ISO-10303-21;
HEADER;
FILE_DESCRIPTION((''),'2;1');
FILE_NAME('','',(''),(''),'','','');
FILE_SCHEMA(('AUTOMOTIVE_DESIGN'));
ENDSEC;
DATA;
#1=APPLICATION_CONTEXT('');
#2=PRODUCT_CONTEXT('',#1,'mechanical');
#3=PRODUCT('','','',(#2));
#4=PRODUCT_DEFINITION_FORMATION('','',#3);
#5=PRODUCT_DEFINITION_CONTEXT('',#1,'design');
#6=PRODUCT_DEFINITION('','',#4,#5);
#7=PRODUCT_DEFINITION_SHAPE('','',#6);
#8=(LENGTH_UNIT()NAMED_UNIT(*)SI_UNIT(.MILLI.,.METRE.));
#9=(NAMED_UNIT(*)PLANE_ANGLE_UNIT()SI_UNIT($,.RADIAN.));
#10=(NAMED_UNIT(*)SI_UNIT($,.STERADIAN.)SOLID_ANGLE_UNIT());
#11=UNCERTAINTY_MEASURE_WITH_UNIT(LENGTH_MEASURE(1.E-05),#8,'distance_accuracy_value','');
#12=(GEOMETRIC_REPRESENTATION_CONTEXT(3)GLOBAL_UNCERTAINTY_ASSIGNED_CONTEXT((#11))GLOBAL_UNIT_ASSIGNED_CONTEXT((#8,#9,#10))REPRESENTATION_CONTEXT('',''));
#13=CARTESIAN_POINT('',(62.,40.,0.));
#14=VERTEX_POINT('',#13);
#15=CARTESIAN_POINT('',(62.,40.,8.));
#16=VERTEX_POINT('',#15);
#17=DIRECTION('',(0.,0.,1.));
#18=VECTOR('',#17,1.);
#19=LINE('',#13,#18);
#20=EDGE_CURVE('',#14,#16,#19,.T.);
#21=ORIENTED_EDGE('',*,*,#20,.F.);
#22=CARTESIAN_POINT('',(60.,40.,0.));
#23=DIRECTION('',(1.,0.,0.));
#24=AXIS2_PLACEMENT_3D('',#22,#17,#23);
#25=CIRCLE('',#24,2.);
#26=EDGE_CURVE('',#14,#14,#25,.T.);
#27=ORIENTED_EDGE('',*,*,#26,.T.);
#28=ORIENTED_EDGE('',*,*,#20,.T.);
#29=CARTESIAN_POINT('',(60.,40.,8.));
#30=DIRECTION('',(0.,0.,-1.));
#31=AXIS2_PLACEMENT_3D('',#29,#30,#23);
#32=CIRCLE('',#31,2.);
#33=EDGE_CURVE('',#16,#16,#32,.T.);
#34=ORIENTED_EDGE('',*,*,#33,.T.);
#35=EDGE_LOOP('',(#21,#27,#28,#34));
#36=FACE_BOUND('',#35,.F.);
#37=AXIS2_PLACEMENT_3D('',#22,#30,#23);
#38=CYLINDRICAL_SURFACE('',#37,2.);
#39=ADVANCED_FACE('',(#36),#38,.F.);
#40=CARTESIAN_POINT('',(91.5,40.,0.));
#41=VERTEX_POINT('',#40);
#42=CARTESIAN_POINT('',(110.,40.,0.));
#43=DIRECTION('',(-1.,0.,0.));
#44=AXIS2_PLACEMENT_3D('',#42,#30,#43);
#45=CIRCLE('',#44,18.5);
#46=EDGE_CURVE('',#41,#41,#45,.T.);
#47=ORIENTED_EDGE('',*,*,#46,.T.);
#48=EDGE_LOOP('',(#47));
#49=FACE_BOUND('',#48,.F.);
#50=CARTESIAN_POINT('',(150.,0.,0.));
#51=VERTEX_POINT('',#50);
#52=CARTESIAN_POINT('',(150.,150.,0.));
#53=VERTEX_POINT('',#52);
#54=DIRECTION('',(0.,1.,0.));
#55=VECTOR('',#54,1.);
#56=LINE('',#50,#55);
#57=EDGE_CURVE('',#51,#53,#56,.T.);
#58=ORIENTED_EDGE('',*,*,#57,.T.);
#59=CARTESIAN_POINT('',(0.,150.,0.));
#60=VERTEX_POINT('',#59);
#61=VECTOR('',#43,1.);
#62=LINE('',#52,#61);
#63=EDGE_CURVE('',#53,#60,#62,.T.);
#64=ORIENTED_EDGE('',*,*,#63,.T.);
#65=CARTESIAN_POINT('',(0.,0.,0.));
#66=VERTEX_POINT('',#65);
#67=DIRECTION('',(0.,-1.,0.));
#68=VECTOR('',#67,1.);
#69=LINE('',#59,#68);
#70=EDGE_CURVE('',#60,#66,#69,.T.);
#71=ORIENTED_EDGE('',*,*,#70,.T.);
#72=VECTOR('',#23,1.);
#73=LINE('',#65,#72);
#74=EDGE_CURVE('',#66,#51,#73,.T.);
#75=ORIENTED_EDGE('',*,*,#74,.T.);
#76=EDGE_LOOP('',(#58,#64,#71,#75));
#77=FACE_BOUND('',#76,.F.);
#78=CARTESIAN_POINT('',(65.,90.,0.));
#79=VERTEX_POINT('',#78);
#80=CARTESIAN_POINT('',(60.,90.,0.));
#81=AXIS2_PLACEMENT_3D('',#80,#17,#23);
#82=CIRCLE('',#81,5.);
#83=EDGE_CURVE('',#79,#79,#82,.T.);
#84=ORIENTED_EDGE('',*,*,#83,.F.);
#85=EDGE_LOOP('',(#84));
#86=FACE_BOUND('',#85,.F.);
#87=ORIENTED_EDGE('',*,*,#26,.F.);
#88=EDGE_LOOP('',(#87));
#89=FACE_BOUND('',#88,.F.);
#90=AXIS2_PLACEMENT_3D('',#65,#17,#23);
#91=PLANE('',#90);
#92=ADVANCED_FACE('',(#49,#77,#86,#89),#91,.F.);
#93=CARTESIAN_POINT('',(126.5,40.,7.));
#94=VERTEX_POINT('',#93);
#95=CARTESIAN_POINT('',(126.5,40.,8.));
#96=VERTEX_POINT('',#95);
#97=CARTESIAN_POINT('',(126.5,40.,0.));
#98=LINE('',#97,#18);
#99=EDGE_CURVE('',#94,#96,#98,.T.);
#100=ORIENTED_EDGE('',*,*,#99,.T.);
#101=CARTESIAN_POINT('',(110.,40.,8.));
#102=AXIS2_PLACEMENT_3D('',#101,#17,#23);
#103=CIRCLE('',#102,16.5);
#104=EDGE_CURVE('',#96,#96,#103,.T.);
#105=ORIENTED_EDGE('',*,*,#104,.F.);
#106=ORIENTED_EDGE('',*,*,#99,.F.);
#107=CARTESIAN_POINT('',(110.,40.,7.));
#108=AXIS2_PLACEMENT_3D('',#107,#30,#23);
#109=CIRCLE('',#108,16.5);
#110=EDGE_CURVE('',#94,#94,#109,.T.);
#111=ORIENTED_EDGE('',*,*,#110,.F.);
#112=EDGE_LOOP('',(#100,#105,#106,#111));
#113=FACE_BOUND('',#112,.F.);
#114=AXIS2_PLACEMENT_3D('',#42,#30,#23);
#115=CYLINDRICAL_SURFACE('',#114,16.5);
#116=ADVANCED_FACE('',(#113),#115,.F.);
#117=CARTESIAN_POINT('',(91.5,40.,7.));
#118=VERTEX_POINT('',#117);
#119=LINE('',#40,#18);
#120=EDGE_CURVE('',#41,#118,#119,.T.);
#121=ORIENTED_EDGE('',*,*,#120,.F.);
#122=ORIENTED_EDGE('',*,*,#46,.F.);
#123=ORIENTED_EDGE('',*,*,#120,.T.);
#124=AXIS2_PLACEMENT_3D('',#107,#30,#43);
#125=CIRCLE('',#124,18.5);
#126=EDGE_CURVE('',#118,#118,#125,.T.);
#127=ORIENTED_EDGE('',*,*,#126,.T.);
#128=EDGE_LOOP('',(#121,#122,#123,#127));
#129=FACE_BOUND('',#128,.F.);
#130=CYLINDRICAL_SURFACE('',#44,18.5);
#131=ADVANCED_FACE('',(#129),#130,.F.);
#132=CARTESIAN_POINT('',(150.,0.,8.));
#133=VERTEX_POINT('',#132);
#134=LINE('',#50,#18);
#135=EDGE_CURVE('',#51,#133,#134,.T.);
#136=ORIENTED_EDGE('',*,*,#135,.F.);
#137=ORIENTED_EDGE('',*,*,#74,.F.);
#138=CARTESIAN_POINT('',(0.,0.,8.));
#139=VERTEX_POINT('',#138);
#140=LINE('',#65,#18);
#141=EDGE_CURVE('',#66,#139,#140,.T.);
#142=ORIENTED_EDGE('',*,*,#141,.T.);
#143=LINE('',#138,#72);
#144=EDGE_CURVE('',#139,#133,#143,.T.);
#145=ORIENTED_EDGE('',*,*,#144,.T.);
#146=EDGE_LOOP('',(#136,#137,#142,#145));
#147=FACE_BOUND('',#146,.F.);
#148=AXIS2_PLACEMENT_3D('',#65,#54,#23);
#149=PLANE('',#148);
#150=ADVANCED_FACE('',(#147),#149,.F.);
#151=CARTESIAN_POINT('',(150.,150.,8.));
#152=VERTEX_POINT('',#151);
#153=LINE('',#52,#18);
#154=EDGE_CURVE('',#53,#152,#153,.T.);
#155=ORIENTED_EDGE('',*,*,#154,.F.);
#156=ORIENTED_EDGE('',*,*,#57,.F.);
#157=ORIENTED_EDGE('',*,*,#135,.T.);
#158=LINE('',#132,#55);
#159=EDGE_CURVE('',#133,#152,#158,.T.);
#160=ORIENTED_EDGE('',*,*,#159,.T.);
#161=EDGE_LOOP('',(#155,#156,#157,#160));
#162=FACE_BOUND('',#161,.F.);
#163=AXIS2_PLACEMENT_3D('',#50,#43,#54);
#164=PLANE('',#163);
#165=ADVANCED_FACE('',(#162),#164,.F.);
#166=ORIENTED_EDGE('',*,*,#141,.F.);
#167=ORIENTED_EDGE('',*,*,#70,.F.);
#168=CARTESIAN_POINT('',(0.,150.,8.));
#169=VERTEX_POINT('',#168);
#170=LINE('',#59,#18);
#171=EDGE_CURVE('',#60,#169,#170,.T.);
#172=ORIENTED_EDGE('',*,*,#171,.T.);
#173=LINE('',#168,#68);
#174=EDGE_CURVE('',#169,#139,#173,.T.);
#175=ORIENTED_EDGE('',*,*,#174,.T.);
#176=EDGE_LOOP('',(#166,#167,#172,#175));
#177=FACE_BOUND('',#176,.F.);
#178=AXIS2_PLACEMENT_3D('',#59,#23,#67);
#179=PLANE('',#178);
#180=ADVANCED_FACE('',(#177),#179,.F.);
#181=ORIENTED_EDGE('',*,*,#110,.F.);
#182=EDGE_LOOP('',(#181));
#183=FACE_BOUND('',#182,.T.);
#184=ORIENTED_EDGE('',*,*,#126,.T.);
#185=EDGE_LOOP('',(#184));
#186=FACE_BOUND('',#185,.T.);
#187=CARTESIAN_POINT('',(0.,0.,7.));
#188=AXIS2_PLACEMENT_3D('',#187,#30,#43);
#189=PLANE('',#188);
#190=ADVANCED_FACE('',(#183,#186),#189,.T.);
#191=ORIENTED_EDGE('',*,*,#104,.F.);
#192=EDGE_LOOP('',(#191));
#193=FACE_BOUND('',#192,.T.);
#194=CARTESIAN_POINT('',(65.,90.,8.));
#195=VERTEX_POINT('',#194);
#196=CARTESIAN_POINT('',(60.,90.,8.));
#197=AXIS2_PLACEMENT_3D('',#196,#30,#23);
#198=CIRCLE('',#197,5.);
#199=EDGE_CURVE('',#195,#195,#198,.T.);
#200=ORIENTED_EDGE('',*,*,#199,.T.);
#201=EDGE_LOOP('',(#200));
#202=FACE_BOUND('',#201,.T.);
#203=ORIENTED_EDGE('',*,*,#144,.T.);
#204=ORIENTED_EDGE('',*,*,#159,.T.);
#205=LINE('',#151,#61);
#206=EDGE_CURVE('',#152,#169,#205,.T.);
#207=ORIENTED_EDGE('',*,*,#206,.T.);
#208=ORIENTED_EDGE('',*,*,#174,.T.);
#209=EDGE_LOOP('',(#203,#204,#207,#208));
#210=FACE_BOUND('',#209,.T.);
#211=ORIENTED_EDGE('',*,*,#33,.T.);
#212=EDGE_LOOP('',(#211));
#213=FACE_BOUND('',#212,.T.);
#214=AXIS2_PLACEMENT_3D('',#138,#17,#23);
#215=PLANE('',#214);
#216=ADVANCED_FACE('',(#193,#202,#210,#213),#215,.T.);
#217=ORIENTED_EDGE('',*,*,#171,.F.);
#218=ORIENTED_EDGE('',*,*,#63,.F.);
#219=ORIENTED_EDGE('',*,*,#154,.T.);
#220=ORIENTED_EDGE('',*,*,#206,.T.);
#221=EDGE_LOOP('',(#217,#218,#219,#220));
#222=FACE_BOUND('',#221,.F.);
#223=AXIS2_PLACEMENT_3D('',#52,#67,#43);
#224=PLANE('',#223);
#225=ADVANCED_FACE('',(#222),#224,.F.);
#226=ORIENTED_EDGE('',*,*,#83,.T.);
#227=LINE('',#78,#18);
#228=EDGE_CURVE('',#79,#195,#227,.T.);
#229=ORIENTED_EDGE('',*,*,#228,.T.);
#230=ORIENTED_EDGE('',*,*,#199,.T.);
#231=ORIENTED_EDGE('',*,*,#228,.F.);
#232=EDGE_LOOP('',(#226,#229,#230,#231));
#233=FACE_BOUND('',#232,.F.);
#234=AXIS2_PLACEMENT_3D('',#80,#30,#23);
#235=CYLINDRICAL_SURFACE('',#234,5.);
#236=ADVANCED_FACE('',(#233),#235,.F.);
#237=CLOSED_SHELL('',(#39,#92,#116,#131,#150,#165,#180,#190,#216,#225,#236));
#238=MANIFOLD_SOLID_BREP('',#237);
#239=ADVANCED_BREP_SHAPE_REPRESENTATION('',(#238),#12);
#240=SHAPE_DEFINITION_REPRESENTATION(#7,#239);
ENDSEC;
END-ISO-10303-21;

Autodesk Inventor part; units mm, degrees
ref_plane "YZ Plane" through (0, 0, 0) normal (1, 0, 0) x (0, 1, 0)
ref_plane "XZ Plane" through (0, 0, 0) normal (0, 1, 0) x (-1, 0, 0)
ref_plane "XY Plane" through (0, 0, 0) normal (0, 0, 1) x (1, 0, 0)
sketch "Sketch1" plane through (0, 0, 0) normal (0, 0, 1) x (1, 0, 0)
  line L0 (0, 0) -> (150, 0)
  line L1 (150, 0) -> (150, 150)
  line L2 (150, 150) -> (0, 150)
  line L3 (0, 150) -> (0, 0)
  circle A0 centre (110, 40) radius 16.5
  circle A1 centre (60, 40) radius 2
  line L4 (60, 40) -> (60, 90)
  circle A2 centre (60, 90) radius 5
  dimension "d0" = 150
  dimension "d1" = 150
  dimension "d2" = 33
  dimension "d3" = 4
  dimension "d4" = 50
  dimension "d5" = 10
extrude "Extrusion1" add sketch "Sketch1" along normal blind 8
sketch "Sketch2" plane through (0, 0, 0) normal (0, 0, -1) x (-1, 0, 0)
  circle A0 centre (-110, 40) radius 18.5
  point P0 (0, 0)
  dimension "d8" = 37
extrude "Extrusion2" cut sketch "Sketch2" against normal blind 7
properties part number "cote gauche"
